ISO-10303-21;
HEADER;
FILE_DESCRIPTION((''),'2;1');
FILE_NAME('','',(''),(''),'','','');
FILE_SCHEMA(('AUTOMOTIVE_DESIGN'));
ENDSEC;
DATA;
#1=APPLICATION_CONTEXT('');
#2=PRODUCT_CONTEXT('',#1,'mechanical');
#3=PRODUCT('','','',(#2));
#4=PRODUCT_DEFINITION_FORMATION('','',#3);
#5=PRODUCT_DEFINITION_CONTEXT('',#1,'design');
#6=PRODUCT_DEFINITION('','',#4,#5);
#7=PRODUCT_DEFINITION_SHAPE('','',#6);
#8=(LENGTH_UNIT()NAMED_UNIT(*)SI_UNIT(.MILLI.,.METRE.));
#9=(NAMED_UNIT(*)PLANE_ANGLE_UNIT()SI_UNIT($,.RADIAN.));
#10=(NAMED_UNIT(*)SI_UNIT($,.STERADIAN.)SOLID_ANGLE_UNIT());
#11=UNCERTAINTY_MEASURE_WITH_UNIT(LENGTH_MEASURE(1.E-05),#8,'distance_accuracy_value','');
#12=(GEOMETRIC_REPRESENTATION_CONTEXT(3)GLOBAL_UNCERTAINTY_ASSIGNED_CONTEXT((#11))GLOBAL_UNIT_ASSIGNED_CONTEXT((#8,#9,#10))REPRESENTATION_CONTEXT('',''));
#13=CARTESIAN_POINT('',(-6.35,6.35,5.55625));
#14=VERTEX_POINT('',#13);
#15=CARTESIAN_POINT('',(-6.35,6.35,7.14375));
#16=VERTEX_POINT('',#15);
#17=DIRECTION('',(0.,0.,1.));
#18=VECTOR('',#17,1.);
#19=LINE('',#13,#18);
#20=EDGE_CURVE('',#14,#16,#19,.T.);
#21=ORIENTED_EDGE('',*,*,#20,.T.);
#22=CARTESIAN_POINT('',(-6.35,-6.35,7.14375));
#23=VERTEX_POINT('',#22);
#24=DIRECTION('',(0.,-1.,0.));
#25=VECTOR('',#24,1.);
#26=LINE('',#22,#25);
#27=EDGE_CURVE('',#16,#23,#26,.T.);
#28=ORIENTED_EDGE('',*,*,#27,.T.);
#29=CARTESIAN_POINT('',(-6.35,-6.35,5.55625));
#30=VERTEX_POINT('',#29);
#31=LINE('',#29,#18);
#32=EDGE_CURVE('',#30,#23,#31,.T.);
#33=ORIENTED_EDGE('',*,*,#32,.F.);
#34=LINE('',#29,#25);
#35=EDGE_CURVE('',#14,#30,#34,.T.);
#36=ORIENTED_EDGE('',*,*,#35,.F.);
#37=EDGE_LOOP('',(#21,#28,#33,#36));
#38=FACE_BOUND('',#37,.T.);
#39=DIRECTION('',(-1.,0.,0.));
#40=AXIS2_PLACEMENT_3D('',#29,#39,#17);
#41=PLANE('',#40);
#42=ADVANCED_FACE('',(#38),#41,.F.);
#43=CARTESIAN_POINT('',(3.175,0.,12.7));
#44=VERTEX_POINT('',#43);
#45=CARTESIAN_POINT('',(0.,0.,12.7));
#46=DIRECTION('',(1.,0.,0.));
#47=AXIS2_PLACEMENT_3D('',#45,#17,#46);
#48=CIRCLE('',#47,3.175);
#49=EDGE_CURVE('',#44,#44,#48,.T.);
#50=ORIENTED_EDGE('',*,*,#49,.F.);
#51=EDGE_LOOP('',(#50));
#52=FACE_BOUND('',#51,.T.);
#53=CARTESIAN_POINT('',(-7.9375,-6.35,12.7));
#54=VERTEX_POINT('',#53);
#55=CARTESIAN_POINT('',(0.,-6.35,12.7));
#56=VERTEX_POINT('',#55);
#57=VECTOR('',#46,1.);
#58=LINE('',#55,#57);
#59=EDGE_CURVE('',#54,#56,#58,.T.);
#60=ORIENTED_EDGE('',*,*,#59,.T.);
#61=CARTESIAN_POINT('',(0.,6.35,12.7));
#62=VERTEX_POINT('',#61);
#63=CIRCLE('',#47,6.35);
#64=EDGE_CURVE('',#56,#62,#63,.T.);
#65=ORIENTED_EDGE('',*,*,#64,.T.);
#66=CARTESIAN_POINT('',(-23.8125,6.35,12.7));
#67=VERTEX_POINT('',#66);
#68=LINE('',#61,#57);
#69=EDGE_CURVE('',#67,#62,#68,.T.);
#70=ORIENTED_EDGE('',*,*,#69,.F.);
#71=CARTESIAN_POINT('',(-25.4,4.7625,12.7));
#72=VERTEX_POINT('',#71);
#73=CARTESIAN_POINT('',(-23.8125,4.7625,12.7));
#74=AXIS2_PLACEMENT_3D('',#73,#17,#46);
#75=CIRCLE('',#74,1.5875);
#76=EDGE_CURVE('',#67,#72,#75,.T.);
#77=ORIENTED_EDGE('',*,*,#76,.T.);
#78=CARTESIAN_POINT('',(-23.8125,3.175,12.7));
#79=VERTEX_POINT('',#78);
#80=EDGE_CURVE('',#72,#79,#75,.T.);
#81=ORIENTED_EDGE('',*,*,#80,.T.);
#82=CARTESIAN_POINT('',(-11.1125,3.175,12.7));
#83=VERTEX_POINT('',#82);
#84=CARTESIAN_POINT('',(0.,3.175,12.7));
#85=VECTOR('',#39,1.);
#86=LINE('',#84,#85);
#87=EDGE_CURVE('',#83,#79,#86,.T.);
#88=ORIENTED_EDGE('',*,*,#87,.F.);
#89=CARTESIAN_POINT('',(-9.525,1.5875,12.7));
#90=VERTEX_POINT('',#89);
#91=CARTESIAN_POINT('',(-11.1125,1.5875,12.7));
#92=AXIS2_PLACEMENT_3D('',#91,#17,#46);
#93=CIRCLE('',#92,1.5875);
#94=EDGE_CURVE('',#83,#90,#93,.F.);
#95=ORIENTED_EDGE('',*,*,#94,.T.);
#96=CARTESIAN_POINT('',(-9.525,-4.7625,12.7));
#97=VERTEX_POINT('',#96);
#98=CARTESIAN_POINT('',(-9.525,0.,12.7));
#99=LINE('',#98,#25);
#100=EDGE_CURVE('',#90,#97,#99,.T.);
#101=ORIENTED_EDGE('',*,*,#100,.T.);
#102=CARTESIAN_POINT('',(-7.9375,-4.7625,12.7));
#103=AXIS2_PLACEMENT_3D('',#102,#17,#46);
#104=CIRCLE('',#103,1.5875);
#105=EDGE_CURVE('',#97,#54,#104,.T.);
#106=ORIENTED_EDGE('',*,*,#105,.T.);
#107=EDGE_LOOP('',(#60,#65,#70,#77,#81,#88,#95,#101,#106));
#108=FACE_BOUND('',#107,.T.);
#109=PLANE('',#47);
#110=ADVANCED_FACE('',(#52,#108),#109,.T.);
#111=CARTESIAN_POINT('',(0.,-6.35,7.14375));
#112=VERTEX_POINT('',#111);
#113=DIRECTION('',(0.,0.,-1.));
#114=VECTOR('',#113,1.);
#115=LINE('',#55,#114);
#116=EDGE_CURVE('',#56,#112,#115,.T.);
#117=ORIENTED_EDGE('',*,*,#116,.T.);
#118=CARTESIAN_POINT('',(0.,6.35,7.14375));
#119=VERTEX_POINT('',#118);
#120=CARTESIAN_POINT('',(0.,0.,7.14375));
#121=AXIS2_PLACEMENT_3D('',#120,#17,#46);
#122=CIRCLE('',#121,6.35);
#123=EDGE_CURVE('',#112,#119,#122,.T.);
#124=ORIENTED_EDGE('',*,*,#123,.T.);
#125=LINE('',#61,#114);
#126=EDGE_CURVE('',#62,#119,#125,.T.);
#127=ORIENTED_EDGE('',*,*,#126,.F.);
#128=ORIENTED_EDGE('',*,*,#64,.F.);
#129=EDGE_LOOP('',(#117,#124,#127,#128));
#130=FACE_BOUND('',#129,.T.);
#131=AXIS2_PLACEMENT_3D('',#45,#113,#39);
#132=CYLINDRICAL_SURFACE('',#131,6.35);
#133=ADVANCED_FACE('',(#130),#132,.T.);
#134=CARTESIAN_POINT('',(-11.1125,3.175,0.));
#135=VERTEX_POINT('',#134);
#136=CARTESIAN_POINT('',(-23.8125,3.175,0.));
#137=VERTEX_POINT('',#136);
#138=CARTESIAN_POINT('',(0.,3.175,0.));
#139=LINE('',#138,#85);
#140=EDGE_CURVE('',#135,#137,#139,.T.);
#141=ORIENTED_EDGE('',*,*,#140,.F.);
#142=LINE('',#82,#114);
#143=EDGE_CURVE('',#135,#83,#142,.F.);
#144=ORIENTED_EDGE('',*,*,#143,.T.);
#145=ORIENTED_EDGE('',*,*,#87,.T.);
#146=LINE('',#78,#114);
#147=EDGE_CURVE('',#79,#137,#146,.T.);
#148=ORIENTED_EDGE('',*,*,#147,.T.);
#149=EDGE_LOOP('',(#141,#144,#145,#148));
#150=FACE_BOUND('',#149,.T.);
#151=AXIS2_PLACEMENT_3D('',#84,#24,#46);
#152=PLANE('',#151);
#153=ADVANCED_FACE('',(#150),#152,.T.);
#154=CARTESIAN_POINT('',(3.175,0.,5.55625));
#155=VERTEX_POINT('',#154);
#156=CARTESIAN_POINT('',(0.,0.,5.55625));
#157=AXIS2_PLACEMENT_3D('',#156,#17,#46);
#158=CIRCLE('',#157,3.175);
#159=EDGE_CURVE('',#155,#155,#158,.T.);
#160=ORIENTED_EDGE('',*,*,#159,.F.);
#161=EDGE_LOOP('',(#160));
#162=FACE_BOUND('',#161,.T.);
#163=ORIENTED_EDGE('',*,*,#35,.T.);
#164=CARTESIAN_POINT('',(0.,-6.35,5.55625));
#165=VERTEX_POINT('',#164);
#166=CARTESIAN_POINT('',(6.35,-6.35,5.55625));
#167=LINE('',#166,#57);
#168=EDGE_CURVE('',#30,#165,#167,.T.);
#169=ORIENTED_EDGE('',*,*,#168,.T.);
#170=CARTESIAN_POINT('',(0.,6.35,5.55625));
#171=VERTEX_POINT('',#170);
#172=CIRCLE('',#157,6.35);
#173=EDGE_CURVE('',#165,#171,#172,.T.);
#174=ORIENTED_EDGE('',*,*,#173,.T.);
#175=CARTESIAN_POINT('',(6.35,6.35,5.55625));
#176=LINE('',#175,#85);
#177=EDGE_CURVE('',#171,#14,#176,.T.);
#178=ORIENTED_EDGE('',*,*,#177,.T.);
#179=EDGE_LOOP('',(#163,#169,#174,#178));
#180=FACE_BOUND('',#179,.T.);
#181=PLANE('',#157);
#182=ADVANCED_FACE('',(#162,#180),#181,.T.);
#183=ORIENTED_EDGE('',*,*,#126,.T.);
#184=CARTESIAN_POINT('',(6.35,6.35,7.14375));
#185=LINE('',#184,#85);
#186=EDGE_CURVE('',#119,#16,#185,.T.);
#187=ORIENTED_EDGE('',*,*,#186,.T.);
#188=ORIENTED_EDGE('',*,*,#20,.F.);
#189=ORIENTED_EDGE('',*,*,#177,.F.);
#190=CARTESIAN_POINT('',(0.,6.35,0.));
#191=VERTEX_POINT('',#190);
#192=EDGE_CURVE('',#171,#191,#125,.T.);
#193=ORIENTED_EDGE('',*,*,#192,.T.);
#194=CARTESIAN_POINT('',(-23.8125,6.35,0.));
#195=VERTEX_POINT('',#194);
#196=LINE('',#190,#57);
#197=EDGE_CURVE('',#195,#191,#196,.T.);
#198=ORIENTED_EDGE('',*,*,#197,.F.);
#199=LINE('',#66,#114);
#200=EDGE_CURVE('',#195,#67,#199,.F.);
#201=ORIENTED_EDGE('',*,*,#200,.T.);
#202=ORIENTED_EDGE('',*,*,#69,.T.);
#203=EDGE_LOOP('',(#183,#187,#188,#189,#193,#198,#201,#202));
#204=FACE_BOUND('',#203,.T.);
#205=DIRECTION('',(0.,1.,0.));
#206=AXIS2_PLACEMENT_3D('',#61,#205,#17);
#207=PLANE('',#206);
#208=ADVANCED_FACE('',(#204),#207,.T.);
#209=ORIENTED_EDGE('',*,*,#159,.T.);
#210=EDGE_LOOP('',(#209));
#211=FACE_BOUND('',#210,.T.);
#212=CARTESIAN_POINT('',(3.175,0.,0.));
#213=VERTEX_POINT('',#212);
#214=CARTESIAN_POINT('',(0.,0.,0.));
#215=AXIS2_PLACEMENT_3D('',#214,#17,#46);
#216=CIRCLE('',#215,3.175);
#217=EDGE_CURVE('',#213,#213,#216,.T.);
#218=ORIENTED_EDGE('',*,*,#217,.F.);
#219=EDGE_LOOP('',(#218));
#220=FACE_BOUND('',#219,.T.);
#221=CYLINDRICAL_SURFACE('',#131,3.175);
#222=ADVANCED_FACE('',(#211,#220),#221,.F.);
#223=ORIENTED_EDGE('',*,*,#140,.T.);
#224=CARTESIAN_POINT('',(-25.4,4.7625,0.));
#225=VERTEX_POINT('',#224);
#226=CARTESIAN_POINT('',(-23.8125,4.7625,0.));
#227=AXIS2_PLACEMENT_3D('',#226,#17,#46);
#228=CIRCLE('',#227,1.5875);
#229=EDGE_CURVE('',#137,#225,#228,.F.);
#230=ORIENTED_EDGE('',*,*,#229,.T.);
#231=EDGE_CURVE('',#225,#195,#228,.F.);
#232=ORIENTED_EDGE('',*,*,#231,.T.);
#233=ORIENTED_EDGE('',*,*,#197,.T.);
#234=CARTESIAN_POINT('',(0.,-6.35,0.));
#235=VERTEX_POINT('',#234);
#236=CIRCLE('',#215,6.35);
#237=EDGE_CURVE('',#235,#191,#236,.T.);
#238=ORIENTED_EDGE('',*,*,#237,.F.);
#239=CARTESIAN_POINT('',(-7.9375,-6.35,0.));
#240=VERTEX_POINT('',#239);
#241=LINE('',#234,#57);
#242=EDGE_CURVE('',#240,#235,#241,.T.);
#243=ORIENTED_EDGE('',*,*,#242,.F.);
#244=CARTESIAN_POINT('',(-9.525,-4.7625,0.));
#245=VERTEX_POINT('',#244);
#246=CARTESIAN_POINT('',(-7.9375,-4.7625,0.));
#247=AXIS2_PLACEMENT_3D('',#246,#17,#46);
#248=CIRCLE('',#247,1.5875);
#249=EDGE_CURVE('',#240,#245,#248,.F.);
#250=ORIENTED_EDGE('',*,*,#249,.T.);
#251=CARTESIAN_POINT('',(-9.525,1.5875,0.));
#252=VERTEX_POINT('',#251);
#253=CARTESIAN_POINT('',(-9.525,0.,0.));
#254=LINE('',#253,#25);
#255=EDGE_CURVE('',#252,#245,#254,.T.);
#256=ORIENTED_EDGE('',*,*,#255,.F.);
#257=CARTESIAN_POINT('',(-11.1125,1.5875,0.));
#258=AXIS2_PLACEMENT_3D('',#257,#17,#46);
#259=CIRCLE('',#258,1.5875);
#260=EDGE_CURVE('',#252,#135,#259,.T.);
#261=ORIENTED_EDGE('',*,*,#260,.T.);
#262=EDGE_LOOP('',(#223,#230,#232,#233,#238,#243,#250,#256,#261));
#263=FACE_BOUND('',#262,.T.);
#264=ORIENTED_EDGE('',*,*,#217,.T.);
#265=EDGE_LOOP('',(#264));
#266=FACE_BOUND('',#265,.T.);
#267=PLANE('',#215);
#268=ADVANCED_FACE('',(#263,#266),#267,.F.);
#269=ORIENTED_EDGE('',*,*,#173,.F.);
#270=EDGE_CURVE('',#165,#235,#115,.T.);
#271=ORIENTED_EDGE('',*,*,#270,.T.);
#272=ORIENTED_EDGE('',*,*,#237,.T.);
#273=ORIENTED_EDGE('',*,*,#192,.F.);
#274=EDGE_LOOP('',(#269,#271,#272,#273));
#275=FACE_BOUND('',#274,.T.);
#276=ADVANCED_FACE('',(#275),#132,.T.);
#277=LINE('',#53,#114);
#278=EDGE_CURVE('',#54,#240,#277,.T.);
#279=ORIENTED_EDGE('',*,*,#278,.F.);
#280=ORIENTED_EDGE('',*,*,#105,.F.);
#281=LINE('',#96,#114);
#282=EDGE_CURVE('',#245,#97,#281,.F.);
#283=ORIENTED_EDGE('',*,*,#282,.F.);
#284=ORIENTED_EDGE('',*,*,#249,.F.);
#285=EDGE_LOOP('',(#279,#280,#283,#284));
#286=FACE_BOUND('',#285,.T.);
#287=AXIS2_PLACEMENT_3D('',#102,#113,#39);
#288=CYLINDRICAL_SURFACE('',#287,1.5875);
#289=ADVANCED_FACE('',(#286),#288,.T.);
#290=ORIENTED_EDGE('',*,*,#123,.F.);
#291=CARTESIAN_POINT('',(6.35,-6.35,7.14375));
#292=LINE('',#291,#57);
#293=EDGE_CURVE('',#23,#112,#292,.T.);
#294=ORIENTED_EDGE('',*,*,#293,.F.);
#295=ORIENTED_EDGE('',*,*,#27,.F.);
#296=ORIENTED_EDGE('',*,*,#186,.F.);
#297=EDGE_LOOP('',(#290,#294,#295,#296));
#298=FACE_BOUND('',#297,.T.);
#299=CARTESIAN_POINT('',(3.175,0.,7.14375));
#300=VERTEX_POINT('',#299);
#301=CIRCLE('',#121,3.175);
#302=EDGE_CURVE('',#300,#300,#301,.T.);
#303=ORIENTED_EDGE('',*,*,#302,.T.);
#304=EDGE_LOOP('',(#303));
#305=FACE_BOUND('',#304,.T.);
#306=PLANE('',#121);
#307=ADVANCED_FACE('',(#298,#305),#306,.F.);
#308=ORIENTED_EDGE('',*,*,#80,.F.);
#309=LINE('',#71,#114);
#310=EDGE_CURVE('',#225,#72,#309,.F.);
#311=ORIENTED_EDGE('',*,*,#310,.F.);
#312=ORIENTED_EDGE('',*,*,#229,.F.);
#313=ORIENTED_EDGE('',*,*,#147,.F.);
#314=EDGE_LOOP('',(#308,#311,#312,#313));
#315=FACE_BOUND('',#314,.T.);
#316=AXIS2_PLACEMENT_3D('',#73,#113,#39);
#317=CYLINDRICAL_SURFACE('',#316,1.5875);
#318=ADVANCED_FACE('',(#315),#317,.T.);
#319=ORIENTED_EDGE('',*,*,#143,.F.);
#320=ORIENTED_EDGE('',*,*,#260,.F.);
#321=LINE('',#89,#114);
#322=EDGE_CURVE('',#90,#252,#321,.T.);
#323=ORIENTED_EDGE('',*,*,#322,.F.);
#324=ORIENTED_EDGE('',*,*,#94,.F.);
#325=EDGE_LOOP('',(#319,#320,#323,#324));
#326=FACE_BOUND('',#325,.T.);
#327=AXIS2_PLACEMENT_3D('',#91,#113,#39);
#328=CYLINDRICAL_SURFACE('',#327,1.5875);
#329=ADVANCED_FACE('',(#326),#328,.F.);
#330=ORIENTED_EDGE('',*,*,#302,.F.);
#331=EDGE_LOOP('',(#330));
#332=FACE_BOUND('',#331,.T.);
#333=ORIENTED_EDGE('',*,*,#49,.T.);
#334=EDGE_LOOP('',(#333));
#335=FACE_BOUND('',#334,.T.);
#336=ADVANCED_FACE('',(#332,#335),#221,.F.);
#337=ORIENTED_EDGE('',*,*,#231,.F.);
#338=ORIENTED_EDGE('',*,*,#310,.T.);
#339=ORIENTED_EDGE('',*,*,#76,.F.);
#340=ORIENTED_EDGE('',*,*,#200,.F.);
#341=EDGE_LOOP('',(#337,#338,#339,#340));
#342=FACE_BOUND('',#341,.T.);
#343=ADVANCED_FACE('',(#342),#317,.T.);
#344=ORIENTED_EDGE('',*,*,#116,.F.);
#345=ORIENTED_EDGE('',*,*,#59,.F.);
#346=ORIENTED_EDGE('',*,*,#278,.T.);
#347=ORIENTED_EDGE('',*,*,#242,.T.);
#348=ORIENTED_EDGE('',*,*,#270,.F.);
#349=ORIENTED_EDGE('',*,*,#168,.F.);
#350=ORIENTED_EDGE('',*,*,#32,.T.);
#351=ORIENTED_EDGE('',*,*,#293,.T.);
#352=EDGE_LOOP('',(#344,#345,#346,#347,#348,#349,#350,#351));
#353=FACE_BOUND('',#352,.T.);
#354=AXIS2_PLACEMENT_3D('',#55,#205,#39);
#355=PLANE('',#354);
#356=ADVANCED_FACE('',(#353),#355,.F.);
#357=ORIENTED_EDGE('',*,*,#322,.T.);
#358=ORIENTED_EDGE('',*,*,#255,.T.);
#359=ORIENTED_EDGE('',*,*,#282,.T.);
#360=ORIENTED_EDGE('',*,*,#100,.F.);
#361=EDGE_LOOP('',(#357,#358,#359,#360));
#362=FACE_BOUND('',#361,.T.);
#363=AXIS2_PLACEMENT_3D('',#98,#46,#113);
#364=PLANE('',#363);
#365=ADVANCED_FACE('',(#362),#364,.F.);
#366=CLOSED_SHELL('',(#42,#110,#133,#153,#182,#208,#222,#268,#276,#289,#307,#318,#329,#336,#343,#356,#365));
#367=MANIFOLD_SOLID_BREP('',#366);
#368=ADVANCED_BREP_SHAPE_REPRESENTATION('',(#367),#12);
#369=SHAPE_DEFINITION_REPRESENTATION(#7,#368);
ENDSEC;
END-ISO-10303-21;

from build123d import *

# Parameters (mm, degrees)
SKETCH1_R           = 3.175
BOSS_EXTRUDE1_DEPTH = 12.7
CUT_EXTRUDE1_START  = -5.55625
SKETCH2_W           = 12.7
SKETCH2_H           = 12.7
CUT_EXTRUDE1_DEPTH  = 1.5875
FILLET1_R           = 1.5875


with BuildPart() as part:
    # Sketch1 → Boss-Extrude1 (new body)
    with BuildSketch(Plane.XY):
        with BuildLine():
            ThreePointArc((0, -6.35), (6.35, 0), (0, 6.35))
            Line((0, 6.35), (-25.4, 6.35))
            Line((-25.4, 6.35), (-25.4, 3.175))
            Line((-25.4, 3.175), (-9.525, 3.175))
            Line((-9.525, 3.175), (-9.525, -6.35))
            Line((-9.525, -6.35), (0, -6.35))
        make_face()
        Circle(SKETCH1_R, mode=Mode.SUBTRACT)
    extrude(amount=BOSS_EXTRUDE1_DEPTH)

    # Sketch2 → Cut-Extrude1 (cut)
    with BuildSketch(Plane.XY.offset(12.7).offset(CUT_EXTRUDE1_START)):
        Rectangle(SKETCH2_W, SKETCH2_H)
    extrude(amount=-CUT_EXTRUDE1_DEPTH, mode=Mode.SUBTRACT)

    # Fillet1
    fillet1_edges = [part.edges().sort_by_distance(p)[0] for p in [
        (-9.525, 3.175, 6.35),
        (-9.525, -6.35, 6.35),
        (-25.4, 6.35, 6.35),
        (-25.4, 3.175, 6.35),
    ]]
    fillet(fillet1_edges, radius=FILLET1_R - 0.0001)  # a hair under: the kernel refuses the full size


solid = part.part
